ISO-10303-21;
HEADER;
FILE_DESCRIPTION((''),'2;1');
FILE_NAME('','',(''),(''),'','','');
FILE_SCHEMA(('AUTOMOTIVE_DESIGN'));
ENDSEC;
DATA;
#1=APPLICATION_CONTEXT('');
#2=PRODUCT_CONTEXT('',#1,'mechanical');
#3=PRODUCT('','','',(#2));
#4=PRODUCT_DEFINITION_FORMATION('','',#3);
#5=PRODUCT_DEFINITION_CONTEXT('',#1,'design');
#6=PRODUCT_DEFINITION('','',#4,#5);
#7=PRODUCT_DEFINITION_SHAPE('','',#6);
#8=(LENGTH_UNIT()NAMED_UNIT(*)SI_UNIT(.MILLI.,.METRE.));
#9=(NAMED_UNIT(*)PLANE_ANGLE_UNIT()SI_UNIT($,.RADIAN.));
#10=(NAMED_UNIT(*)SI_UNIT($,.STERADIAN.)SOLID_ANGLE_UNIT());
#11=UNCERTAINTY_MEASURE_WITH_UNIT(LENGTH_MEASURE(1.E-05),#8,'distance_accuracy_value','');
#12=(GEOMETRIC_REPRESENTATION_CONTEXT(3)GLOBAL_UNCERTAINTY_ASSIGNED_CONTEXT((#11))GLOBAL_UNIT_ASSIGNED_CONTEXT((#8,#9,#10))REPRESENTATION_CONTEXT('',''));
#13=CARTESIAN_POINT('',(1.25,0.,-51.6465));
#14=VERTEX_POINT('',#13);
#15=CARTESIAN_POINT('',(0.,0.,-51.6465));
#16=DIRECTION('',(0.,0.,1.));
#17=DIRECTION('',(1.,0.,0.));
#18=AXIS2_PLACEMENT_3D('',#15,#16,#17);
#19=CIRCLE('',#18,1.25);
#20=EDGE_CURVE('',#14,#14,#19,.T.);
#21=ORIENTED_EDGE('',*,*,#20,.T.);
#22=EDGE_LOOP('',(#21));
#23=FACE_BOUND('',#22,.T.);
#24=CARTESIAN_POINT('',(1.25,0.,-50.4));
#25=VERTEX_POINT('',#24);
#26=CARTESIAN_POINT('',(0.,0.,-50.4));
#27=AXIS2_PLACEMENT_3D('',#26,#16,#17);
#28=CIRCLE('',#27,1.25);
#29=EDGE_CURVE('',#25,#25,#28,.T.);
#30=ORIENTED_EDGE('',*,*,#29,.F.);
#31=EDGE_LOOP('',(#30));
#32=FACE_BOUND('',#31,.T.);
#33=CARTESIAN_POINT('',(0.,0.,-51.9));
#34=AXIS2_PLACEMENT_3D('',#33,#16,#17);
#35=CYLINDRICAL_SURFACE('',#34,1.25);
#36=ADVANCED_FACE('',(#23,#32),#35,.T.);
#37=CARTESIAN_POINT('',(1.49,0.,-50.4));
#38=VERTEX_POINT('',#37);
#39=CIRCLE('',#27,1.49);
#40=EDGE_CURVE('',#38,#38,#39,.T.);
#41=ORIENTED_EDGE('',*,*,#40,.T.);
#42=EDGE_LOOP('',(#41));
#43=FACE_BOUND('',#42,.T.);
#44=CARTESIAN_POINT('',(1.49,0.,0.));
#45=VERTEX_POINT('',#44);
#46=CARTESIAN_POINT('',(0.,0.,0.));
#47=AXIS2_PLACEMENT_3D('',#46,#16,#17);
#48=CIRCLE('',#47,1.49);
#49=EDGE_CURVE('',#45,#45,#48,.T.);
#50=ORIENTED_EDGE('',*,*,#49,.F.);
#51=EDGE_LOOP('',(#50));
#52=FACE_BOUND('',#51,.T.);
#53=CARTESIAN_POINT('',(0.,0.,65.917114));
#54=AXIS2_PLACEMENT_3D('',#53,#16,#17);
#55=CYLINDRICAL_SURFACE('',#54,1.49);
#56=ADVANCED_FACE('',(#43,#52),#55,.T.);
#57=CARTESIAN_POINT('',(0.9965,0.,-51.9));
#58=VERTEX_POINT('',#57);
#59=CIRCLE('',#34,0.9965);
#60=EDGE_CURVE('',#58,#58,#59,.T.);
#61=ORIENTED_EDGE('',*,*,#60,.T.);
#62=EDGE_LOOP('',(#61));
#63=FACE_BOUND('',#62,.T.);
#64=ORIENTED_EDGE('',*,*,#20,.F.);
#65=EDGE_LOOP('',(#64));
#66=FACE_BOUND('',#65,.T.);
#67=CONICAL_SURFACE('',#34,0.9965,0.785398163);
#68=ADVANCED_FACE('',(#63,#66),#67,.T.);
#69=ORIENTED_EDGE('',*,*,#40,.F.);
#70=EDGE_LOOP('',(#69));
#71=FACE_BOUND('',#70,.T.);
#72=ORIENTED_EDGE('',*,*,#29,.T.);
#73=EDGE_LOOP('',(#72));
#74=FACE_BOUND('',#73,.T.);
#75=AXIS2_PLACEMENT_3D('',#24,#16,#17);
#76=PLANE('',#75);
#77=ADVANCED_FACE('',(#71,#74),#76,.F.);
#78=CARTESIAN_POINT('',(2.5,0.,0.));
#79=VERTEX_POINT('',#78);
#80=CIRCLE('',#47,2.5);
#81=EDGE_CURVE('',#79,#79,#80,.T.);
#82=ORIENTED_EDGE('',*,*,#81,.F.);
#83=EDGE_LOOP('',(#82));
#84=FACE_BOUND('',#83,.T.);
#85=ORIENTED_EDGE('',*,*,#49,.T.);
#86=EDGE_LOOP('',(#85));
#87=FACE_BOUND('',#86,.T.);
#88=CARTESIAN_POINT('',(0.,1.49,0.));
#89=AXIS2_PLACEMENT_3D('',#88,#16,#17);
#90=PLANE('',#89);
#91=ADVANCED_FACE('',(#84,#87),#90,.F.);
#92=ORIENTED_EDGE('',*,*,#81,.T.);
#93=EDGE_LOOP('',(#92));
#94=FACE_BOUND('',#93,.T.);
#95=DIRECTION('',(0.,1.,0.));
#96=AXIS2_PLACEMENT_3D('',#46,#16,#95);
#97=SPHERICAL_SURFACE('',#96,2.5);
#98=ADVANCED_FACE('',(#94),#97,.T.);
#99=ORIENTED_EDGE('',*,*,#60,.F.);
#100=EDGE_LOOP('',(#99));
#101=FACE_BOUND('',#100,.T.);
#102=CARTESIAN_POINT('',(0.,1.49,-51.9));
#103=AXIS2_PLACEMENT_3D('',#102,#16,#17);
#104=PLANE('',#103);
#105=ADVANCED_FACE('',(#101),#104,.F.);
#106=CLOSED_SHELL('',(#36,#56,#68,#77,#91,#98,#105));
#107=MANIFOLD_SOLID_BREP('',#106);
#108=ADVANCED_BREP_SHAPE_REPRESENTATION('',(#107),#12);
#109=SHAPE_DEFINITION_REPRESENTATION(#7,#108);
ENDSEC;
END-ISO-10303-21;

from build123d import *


# Read off the part's stored shape, not the designer's step: M2.5 Machine Threads Stud1
with BuildPart() as part:
    # Sketch1 → Revolve1 (revolve)
    with BuildSketch(Plane(origin=(0, 0, 0), x_dir=(0, 0, -1), z_dir=(1, 0, 0))):
        with BuildLine():
            Line((0, 1.49), (51.9, 1.49))
            Line((51.9, 1.49), (51.9, 0))
            Line((51.9, 0), (0, 0))
            Line((0, 0), (-2.5, 0))
            ThreePointArc((-2.5, 0), (-1.767766953, 1.767766953), (0, 2.5))
            Line((0, 2.5), (0, 1.49))
        make_face()
    revolve(axis=Axis((0, 0, 65.917114172), (0, 0, -1)))

    # M2.5 Machine Threads Stud1 outline → M2.5 Machine Threads Stud1 (revolve, cut)
    with BuildSketch(Plane.XZ):
        Polygon((0.9965, -51.9), (1.49, -51.9), (1.49, -50.4), (1.25, -50.4), (1.25, -51.6465), align=None)
    revolve(axis=Axis((0, 0, 0), (0, 0, 1)), mode=Mode.SUBTRACT)


solid = part.part
